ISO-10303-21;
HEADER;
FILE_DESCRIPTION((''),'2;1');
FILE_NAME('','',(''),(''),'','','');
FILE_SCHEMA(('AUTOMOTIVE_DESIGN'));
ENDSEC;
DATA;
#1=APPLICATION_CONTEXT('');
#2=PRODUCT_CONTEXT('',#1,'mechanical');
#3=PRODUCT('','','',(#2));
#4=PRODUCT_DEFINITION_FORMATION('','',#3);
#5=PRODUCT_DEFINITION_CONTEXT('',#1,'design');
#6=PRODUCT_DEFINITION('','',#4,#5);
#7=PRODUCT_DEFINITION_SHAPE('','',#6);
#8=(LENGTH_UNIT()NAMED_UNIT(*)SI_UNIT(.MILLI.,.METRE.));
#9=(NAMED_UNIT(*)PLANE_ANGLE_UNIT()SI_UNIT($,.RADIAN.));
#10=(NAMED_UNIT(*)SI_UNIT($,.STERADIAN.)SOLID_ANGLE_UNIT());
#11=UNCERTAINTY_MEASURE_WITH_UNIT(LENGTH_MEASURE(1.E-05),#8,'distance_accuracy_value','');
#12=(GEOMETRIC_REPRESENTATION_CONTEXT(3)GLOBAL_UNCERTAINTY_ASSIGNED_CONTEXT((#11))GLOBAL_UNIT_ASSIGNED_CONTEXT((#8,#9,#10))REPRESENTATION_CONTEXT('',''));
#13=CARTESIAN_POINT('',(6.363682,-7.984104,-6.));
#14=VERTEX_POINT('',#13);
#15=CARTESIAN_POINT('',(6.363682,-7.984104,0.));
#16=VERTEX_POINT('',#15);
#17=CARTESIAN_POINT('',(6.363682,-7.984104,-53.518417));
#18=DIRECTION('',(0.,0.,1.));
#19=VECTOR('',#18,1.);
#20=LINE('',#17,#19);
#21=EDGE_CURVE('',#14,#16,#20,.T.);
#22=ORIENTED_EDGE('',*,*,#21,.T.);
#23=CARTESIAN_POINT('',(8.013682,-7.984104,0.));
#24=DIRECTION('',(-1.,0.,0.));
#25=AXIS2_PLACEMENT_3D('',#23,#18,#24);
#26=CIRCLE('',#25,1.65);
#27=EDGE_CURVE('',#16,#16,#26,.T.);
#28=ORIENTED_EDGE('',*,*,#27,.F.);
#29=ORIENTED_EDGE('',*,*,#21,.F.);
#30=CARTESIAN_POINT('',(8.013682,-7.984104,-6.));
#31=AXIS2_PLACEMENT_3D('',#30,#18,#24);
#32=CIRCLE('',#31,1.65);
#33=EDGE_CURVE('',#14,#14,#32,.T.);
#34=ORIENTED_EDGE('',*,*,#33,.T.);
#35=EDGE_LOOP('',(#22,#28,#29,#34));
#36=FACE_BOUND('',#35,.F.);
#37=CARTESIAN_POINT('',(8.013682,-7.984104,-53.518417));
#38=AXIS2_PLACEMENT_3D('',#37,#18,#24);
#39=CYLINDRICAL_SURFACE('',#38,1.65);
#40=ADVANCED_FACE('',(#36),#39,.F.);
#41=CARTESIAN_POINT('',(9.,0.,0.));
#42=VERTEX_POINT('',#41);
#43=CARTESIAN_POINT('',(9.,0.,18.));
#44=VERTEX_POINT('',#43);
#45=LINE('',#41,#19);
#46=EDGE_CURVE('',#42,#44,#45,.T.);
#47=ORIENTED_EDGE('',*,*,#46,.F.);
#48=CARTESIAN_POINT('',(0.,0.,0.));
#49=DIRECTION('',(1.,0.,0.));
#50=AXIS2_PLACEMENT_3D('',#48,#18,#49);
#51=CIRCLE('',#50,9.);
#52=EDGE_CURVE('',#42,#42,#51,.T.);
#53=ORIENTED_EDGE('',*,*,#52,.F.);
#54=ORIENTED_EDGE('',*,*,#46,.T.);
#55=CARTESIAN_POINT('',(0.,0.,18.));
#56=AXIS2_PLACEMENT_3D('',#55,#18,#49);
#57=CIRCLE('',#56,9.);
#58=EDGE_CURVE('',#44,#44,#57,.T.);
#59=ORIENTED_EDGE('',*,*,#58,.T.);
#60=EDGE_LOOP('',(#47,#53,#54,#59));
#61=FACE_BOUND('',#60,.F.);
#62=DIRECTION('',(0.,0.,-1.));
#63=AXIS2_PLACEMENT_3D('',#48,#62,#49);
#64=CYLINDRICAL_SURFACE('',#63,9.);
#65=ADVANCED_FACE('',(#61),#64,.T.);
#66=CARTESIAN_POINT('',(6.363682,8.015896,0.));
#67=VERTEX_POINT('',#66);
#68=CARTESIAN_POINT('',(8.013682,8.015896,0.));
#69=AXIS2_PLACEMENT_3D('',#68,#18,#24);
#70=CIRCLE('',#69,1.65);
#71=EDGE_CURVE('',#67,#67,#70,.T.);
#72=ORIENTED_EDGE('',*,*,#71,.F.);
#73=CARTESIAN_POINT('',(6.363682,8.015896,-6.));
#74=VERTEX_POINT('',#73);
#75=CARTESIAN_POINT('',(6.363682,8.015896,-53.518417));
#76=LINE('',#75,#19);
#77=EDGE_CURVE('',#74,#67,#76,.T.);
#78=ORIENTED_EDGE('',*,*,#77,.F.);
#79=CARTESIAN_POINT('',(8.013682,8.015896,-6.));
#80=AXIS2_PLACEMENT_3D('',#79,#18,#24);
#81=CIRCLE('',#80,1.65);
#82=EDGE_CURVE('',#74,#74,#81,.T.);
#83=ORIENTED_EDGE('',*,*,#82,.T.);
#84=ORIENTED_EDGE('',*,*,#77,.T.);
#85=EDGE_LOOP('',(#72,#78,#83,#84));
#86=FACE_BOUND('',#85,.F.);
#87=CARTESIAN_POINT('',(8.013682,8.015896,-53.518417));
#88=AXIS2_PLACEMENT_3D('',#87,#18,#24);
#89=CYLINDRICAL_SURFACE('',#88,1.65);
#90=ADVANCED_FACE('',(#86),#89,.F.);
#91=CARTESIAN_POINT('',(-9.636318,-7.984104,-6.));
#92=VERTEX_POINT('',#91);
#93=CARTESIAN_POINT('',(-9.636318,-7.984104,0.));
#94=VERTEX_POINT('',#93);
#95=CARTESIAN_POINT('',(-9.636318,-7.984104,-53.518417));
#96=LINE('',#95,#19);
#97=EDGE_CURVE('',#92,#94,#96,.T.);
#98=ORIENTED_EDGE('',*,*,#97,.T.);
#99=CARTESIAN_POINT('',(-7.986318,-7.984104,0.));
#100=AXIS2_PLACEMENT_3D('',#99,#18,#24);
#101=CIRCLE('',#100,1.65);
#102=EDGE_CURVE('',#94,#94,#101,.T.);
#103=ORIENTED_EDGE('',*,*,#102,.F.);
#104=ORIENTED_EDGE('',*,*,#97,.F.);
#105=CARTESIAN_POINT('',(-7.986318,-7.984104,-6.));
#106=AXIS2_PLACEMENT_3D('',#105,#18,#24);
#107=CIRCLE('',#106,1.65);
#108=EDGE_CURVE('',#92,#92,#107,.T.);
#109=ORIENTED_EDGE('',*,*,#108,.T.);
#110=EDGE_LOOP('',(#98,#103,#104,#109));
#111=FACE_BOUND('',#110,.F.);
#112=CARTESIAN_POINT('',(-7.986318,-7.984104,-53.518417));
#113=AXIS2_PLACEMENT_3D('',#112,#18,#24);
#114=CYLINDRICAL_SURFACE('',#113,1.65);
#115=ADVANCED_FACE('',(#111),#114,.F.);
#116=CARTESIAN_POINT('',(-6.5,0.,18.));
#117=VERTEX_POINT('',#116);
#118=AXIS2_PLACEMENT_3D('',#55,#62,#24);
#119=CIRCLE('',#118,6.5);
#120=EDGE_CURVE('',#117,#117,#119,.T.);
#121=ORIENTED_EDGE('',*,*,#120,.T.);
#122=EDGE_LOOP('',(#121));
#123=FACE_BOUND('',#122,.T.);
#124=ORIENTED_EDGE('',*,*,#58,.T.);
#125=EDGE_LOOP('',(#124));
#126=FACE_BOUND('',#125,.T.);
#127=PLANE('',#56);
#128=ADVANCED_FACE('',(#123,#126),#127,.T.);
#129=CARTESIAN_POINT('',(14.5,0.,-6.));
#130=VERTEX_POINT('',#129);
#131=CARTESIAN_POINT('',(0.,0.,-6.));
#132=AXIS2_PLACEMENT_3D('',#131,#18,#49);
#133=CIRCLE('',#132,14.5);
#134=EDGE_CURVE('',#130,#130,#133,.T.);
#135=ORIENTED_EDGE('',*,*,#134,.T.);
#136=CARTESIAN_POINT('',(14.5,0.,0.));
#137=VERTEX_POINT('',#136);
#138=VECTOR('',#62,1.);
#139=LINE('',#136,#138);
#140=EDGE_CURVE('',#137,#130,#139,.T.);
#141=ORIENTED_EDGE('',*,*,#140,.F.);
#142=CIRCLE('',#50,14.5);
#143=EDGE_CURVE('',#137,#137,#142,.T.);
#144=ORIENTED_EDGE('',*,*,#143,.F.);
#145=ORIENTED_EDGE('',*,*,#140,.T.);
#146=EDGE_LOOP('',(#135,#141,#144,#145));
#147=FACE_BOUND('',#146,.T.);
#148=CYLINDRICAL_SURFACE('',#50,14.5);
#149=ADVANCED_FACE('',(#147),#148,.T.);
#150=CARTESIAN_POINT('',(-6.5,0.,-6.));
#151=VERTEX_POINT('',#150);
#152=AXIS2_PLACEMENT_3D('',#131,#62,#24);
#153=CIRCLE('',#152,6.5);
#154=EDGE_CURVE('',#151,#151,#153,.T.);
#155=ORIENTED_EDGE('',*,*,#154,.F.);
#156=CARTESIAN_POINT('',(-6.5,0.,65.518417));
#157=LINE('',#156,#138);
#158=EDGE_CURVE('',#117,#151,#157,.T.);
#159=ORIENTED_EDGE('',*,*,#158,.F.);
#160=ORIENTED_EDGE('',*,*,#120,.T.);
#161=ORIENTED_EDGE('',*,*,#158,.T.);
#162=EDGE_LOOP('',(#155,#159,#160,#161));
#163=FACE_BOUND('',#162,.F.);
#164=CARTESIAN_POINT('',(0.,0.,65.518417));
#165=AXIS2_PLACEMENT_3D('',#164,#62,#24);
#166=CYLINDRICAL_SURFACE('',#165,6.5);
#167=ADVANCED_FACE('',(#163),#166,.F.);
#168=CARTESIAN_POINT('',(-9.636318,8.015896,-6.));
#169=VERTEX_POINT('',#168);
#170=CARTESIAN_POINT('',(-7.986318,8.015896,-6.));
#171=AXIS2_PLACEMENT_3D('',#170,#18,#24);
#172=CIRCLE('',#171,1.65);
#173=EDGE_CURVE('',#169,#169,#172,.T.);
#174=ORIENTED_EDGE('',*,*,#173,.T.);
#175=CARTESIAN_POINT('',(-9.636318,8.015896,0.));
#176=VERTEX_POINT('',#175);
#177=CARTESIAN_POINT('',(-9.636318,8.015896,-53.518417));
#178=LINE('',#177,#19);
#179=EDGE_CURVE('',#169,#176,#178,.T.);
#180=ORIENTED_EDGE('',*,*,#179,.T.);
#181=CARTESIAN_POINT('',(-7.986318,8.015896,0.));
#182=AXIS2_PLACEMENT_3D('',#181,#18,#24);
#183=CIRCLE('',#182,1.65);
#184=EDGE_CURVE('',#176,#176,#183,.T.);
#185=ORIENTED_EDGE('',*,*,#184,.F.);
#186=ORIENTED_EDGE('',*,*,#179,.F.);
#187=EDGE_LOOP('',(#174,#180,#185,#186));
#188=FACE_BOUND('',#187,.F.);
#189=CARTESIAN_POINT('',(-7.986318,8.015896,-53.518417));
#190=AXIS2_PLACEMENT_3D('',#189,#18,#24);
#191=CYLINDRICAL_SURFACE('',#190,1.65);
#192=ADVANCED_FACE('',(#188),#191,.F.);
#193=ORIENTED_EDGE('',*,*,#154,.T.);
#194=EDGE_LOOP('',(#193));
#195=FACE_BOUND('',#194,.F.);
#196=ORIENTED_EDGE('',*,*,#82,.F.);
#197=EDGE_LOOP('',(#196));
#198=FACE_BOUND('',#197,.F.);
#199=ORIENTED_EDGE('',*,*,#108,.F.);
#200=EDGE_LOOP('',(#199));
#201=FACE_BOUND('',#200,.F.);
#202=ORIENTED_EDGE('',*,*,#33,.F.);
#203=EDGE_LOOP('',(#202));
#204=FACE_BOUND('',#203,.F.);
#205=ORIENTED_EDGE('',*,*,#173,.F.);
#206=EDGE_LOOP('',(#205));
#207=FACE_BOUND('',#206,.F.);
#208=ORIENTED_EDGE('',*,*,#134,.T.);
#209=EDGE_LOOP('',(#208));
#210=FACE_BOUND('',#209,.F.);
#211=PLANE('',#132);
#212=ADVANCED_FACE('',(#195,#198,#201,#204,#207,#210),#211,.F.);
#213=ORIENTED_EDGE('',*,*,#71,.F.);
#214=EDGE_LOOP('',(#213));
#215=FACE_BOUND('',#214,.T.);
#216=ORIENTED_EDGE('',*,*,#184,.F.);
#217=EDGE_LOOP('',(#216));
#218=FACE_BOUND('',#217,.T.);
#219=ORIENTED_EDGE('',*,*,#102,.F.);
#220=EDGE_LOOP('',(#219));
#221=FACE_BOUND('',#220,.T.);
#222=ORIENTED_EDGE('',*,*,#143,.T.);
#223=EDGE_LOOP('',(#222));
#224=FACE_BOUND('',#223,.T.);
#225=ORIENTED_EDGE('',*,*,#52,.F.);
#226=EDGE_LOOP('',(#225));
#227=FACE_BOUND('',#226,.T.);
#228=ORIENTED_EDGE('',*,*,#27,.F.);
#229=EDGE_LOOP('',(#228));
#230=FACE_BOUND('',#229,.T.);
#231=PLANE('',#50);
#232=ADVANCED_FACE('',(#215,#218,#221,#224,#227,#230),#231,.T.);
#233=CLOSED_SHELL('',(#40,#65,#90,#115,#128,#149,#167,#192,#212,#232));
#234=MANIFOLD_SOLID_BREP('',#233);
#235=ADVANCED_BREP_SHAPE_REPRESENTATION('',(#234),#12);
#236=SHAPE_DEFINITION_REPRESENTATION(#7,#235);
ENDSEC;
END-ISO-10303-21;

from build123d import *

# Parameters (mm, degrees)
F0_R     = 14.5
F0_R_2   = 9
F1_DEPTH = 6
F2_DEPTH = 18
F4_D     = 13
F6_D     = 3.3


with BuildPart() as f1:
    # F0 (on Top) → F1 (new body)
    with BuildSketch(Plane.XY):
        Circle(F0_R)
        Circle(F0_R_2, mode=Mode.SUBTRACT)
        Circle(F0_R_2)
    extrude(amount=-F1_DEPTH)

    # F0 (on Top) → F2 (join)
    with BuildSketch(Plane.XY):
        Circle(F0_R_2)
    extrude(amount=F2_DEPTH)

    # F4 (through all)
    with Locations(Plane.XY.offset(18)):
        with Locations((0, 0)):
            Hole(F4_D / 2)

    # F6 (through all)
    with Locations(Plane(origin=(0, 0, -6), x_dir=(1, 0, 0), z_dir=(0, 0, -1))):
        with Locations((8.0136820347, 7.9841035315), (8.0136820347, -8.0158964685), (-7.9863179653, -8.0158964685), (-7.9863179653, 7.9841035315)):
            Hole(F6_D / 2)


solid = f1.part
